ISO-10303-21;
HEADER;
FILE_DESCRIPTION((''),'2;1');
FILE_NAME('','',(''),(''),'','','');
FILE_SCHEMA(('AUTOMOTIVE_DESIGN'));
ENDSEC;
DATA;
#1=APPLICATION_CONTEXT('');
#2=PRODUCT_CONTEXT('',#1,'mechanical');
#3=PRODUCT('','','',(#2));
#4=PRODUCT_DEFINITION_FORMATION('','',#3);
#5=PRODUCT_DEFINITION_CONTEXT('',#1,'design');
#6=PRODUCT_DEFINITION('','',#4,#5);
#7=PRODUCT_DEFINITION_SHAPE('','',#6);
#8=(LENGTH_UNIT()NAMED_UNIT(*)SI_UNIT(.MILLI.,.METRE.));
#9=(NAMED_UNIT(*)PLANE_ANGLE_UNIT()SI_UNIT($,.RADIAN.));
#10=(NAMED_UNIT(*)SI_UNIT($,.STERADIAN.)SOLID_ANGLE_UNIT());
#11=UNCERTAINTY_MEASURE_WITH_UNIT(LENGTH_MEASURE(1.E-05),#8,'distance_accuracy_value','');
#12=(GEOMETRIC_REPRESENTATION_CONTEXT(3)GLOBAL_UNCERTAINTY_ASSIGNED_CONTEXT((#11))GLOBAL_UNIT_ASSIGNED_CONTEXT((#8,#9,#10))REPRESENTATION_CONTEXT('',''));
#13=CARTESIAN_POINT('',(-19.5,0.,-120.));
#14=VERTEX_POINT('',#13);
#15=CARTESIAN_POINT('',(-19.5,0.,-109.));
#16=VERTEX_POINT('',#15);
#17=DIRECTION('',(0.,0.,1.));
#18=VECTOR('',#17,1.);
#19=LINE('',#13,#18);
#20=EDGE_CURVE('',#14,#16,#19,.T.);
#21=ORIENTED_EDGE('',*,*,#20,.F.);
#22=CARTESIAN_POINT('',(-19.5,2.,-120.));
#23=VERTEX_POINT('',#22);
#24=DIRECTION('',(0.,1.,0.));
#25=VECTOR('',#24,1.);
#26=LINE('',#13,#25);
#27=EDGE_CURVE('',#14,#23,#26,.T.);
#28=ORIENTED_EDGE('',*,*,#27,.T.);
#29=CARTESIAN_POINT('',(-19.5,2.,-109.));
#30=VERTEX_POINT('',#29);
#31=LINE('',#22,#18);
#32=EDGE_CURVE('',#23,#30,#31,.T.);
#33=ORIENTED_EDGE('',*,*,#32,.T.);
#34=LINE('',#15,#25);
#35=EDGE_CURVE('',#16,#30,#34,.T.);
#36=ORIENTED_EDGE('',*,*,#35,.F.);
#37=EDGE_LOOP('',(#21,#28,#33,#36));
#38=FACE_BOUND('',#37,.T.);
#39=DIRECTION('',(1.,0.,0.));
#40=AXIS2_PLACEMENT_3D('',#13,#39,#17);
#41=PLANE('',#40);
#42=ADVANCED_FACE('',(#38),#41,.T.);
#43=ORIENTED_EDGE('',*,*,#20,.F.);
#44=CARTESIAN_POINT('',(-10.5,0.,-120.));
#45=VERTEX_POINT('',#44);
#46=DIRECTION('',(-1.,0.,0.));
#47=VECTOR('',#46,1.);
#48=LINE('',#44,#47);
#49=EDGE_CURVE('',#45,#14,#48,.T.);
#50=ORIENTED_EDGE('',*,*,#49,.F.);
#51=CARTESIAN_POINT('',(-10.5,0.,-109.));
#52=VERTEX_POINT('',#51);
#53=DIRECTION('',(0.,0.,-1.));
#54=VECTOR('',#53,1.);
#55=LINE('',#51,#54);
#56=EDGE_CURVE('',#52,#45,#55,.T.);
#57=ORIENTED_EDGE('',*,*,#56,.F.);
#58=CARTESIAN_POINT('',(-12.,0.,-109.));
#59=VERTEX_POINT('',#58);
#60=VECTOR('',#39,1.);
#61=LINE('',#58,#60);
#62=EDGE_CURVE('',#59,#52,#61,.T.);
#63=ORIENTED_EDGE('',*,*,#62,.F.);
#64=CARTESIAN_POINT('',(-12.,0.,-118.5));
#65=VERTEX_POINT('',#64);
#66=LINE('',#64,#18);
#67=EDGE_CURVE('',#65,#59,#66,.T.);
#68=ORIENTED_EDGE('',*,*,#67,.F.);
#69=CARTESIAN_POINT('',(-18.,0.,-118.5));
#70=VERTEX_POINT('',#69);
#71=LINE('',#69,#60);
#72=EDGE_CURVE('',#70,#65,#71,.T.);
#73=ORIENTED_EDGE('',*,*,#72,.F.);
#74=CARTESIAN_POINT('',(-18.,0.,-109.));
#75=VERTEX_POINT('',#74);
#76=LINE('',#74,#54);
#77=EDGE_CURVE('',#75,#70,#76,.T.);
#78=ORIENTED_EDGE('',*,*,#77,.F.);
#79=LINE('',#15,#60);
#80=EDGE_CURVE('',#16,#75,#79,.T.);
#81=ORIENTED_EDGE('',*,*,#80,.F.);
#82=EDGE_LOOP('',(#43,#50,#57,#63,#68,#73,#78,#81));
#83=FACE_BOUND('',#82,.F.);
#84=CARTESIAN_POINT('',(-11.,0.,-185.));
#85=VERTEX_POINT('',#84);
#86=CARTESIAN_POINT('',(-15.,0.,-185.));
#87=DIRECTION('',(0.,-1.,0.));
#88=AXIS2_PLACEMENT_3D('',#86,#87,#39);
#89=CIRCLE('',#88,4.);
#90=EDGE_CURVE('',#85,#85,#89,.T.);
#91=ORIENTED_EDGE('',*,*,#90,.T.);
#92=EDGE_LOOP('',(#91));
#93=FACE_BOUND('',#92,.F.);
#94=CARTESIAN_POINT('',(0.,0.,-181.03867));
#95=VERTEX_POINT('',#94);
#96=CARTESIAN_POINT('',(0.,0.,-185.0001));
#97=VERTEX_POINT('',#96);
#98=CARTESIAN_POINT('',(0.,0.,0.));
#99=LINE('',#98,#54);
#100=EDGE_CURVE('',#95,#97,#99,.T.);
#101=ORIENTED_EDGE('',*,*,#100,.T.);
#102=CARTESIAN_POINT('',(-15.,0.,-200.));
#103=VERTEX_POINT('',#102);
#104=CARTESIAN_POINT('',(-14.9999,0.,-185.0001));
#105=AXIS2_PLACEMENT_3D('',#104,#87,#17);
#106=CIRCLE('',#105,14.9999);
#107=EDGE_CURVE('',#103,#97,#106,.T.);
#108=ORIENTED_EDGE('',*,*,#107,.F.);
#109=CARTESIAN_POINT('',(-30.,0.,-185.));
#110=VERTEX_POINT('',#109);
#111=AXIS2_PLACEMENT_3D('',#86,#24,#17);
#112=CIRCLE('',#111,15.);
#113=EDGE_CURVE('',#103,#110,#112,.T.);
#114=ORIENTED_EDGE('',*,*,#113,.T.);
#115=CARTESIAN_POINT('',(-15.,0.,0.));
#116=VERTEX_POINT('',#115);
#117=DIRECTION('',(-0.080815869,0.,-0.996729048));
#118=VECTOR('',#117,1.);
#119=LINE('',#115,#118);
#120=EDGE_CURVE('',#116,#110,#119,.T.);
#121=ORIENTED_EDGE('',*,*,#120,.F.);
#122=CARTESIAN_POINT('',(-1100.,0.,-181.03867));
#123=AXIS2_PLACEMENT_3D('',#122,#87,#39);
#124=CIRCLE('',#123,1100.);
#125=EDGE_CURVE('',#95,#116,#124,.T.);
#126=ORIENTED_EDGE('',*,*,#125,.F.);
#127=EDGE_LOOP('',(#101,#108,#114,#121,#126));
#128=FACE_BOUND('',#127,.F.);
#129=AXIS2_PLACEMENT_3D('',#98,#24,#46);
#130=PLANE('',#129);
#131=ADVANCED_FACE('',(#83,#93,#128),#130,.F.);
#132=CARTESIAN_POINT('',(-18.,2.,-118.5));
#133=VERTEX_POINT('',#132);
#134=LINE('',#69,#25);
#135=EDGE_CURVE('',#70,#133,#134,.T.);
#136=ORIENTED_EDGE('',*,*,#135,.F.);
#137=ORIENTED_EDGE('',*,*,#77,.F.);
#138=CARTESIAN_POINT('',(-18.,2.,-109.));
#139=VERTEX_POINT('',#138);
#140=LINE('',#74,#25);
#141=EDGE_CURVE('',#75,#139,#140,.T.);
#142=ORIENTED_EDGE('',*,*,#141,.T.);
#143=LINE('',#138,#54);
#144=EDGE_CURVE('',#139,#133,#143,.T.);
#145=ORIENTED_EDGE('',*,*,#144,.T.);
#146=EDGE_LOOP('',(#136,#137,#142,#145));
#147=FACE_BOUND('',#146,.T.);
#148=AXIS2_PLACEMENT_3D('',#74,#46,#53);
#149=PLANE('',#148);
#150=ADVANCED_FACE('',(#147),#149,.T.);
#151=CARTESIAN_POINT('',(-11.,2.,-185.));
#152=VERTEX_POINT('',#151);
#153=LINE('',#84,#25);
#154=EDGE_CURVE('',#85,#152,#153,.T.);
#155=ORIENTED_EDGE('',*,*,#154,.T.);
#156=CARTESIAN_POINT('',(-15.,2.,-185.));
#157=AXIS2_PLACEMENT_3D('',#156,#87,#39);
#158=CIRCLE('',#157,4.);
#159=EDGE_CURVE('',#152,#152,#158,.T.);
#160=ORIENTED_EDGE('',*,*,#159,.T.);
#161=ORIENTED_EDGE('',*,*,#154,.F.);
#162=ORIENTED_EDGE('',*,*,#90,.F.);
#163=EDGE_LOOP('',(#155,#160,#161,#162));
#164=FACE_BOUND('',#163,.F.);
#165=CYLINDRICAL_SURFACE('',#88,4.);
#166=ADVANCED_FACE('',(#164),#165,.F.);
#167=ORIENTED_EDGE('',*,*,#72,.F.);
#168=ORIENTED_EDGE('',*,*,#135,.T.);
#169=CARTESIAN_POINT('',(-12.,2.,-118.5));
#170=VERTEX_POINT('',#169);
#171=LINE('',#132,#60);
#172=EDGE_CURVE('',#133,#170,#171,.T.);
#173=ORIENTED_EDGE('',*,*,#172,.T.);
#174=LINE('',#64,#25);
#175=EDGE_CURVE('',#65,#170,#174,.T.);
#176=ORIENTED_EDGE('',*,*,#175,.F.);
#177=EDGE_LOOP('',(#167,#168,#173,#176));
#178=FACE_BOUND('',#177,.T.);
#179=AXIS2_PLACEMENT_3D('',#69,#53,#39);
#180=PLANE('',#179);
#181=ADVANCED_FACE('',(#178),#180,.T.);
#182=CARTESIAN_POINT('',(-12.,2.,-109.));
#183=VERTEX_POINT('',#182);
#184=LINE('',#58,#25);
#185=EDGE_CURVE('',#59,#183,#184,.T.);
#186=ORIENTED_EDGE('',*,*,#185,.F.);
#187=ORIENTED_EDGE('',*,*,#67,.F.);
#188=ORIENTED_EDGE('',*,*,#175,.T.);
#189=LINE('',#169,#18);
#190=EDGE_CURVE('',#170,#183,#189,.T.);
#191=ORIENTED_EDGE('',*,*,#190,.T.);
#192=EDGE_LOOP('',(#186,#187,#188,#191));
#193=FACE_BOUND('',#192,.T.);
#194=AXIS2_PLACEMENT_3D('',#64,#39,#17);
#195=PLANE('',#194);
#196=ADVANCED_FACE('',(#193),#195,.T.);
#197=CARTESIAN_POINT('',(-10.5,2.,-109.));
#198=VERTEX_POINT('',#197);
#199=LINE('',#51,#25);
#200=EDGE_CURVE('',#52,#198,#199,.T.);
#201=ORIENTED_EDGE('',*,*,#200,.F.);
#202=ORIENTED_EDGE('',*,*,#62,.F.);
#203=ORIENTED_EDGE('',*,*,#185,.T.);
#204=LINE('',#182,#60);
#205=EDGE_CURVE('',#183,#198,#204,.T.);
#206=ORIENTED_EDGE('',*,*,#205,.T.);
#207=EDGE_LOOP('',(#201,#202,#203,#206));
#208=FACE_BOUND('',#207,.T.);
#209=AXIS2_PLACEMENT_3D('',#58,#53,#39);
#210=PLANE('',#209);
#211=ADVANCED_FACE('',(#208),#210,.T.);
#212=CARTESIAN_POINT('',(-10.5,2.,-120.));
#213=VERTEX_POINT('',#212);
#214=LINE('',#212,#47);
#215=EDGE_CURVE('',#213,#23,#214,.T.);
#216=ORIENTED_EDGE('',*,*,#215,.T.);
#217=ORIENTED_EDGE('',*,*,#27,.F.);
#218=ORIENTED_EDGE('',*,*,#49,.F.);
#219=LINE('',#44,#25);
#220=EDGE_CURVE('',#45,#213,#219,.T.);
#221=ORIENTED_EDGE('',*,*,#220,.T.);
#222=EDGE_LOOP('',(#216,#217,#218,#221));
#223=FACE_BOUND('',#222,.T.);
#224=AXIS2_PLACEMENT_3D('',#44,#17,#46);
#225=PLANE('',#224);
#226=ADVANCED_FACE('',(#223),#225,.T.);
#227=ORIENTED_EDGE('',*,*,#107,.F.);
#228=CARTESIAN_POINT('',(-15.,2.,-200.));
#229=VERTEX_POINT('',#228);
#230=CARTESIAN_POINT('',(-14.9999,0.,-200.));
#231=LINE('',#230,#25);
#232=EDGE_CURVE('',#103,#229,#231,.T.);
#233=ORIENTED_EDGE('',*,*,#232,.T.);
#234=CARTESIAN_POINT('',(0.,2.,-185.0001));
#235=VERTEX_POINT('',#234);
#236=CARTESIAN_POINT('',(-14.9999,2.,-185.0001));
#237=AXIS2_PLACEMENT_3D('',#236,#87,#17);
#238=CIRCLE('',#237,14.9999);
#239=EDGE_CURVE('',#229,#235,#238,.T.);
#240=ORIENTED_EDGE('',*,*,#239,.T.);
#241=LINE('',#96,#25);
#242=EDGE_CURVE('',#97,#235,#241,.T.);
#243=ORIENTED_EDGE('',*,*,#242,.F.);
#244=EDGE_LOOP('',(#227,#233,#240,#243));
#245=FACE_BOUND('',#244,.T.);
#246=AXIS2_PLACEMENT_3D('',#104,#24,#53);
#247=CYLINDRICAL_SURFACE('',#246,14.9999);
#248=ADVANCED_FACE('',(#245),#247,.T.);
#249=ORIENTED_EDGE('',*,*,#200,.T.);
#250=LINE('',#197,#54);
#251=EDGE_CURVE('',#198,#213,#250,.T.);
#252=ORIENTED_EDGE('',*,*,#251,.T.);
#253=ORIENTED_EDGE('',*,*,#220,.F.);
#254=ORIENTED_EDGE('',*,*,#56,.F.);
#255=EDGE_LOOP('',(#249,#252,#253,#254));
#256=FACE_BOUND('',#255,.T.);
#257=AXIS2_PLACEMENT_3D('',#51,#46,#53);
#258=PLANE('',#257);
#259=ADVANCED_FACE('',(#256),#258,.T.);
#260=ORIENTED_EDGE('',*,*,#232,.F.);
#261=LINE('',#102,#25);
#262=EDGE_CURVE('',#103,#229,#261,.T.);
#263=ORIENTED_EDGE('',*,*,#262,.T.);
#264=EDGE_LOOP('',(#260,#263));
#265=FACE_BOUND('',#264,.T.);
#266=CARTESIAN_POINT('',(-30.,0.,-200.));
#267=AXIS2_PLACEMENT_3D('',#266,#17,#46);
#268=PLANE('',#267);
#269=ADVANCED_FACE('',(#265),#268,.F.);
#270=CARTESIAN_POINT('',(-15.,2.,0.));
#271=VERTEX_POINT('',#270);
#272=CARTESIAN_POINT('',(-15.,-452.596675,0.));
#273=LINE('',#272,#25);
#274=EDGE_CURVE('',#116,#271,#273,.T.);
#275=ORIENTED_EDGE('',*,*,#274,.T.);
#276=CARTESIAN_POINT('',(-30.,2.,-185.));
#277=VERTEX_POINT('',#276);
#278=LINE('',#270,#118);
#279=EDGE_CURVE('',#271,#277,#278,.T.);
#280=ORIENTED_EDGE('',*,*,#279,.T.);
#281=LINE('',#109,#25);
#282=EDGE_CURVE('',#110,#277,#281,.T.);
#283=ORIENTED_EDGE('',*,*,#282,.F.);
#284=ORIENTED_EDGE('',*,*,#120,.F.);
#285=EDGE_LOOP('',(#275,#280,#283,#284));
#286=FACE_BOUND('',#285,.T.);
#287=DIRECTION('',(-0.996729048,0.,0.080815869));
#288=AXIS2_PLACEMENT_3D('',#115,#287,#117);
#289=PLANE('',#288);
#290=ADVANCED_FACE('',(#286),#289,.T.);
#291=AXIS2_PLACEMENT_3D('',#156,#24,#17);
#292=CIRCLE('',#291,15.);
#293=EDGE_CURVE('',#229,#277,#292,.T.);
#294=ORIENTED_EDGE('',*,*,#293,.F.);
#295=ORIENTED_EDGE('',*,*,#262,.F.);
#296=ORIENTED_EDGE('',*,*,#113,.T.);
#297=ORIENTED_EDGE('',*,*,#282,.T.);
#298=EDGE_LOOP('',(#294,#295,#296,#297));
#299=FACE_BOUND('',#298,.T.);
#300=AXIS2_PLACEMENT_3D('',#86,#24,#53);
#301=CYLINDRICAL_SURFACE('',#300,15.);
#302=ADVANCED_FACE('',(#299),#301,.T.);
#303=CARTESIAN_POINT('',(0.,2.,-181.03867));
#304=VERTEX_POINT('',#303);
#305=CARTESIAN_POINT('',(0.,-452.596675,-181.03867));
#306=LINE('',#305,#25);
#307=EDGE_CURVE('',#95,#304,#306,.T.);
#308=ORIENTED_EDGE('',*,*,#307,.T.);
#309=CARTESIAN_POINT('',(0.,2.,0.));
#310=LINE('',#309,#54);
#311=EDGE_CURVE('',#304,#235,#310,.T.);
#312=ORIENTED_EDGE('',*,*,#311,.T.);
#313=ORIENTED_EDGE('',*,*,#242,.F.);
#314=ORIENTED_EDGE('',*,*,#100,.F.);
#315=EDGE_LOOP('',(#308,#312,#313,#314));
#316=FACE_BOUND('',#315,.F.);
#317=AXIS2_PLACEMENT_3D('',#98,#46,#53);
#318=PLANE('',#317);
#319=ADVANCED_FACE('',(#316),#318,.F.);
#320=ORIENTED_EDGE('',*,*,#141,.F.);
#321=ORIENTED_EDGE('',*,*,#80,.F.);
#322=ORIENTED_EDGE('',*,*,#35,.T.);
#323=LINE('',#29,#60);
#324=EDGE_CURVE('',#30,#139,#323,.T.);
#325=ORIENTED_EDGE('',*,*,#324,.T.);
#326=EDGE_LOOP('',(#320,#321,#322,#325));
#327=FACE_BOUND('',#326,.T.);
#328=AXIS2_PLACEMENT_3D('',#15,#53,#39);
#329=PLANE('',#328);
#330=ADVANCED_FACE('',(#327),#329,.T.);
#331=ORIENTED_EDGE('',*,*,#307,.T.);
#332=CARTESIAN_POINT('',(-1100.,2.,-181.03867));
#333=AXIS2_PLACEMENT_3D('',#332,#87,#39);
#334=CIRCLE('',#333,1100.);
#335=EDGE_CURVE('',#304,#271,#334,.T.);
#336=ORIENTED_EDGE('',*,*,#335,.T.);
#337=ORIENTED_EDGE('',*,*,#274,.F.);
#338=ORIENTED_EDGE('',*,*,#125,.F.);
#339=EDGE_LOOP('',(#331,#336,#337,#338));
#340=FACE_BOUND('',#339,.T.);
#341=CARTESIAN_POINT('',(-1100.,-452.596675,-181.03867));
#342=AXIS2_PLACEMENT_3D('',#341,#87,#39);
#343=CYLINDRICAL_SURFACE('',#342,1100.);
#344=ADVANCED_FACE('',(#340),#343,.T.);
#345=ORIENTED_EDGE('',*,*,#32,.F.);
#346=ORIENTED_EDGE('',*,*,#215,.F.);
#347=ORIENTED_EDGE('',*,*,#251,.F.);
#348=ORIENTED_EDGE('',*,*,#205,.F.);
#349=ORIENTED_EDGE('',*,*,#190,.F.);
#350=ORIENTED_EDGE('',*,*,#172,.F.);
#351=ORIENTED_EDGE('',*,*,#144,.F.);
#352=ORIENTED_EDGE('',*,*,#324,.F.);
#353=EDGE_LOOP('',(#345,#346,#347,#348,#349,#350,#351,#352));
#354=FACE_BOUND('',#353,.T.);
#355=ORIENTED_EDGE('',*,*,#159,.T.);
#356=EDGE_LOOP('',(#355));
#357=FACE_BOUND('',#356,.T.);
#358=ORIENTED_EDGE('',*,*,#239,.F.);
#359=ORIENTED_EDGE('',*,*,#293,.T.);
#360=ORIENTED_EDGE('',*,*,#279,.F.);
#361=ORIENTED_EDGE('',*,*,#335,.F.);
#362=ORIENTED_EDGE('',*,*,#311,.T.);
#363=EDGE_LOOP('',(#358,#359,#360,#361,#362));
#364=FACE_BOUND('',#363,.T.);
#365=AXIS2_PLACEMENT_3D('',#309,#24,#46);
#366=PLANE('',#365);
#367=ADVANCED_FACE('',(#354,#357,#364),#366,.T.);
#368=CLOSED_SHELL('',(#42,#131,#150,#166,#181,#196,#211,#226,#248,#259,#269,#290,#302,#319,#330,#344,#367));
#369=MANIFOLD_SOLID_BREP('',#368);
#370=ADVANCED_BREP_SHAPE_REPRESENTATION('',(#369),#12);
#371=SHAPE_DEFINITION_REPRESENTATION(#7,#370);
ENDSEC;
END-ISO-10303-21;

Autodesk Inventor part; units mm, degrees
ref_plane "YZ Plane" through (0, 0, 0) normal (1, 0, 0) x (0, 1, 0)
ref_plane "XZ Plane" through (0, 0, 0) normal (0, 1, 0) x (-1, 0, 0)
ref_plane "XY Plane" through (0, 0, 0) normal (0, 0, 1) x (1, 0, 0)
sketch "Sketch1" plane through (0, 0, 0) normal (0, 1, 0) x (-1, 0, 0)
  line L0 (15, 0) -> (0, 0)
  line L1 (0, 0) -> (0, -200)
  line L2 (0, -200) -> (15, -200)
  line L3 (15, -200) -> (15, 0)
  dimension "d0" = 15
  dimension "d1" = 15
  dimension "d2" = 200
extrude "Extrusion1" add sketch "Sketch1" along normal blind 2
fillet "Fillet2" radius 15 1 edges at (0, 1, -200)
fillet "Fillet3" radius 1100 1 edges at (0, 1, 0)
mirror "Mirror1" about plane through (-15, 0, -200) normal (-1, 0, 0) of "Extrusion1"
fillet "Fillet5" radius 15 1 edges at (-30, 1, -200)
sketch "Sketch2" plane through (0, 0, 0) normal (0, -1, 0) x (1, 0, 0)
  line L0 (-15, 0) -> (-30, 0) projected
  line L1 (-30, 0) -> (-30, -185) projected
  line L2 (-15, 0) -> (-30, -185)
  line L3 (-30, -185) -> (-30, 0)
  arc A0 (0, -181.0387) -> (-15, 0) centre (-1100, -181.0387) ccw projected
  line L4 (-30, 0) -> (-15, 0)
  point P0 (0, 0)
extrude "Extrusion2" cut sketch "Sketch2" against normal blind 2
sketch "Sketch3" plane through (0, 0, 0) normal (0, -1, 0) x (1, 0, 0)
  arc A0 (-30, -185) -> (0, -185) centre (-15, -185) ccw projected
  line L0 (0, -185) -> (-30, -185) construction
  circle A1 centre (-15, -185) radius 4
  line L1 (-10.5, -109) -> (-10.5, -120)
  line L2 (-10.5, -120) -> (-19.5, -120)
  line L3 (-19.5, -120) -> (-19.5, -109)
  line L4 (-19.5, -109) -> (-18, -109)
  line L5 (-18, -109) -> (-18, -118.5)
  line L6 (-18, -118.5) -> (-12, -118.5)
  line L7 (-12, -118.5) -> (-12, -109)
  line L8 (-12, -109) -> (-10.5, -109)
  point P0 (0, 0)
  dimension "d12" = 8
  dimension "d13" = 9
  dimension "d14" = 6
  dimension "d15" = 1.5
  dimension "d16" = 11
  dimension "d17" = 1.5
  dimension "d18" = 4.5
  dimension "d19" = 65
extrude "Extrusion3" cut sketch "Sketch3" against normal blind 2
properties part number "profil"
